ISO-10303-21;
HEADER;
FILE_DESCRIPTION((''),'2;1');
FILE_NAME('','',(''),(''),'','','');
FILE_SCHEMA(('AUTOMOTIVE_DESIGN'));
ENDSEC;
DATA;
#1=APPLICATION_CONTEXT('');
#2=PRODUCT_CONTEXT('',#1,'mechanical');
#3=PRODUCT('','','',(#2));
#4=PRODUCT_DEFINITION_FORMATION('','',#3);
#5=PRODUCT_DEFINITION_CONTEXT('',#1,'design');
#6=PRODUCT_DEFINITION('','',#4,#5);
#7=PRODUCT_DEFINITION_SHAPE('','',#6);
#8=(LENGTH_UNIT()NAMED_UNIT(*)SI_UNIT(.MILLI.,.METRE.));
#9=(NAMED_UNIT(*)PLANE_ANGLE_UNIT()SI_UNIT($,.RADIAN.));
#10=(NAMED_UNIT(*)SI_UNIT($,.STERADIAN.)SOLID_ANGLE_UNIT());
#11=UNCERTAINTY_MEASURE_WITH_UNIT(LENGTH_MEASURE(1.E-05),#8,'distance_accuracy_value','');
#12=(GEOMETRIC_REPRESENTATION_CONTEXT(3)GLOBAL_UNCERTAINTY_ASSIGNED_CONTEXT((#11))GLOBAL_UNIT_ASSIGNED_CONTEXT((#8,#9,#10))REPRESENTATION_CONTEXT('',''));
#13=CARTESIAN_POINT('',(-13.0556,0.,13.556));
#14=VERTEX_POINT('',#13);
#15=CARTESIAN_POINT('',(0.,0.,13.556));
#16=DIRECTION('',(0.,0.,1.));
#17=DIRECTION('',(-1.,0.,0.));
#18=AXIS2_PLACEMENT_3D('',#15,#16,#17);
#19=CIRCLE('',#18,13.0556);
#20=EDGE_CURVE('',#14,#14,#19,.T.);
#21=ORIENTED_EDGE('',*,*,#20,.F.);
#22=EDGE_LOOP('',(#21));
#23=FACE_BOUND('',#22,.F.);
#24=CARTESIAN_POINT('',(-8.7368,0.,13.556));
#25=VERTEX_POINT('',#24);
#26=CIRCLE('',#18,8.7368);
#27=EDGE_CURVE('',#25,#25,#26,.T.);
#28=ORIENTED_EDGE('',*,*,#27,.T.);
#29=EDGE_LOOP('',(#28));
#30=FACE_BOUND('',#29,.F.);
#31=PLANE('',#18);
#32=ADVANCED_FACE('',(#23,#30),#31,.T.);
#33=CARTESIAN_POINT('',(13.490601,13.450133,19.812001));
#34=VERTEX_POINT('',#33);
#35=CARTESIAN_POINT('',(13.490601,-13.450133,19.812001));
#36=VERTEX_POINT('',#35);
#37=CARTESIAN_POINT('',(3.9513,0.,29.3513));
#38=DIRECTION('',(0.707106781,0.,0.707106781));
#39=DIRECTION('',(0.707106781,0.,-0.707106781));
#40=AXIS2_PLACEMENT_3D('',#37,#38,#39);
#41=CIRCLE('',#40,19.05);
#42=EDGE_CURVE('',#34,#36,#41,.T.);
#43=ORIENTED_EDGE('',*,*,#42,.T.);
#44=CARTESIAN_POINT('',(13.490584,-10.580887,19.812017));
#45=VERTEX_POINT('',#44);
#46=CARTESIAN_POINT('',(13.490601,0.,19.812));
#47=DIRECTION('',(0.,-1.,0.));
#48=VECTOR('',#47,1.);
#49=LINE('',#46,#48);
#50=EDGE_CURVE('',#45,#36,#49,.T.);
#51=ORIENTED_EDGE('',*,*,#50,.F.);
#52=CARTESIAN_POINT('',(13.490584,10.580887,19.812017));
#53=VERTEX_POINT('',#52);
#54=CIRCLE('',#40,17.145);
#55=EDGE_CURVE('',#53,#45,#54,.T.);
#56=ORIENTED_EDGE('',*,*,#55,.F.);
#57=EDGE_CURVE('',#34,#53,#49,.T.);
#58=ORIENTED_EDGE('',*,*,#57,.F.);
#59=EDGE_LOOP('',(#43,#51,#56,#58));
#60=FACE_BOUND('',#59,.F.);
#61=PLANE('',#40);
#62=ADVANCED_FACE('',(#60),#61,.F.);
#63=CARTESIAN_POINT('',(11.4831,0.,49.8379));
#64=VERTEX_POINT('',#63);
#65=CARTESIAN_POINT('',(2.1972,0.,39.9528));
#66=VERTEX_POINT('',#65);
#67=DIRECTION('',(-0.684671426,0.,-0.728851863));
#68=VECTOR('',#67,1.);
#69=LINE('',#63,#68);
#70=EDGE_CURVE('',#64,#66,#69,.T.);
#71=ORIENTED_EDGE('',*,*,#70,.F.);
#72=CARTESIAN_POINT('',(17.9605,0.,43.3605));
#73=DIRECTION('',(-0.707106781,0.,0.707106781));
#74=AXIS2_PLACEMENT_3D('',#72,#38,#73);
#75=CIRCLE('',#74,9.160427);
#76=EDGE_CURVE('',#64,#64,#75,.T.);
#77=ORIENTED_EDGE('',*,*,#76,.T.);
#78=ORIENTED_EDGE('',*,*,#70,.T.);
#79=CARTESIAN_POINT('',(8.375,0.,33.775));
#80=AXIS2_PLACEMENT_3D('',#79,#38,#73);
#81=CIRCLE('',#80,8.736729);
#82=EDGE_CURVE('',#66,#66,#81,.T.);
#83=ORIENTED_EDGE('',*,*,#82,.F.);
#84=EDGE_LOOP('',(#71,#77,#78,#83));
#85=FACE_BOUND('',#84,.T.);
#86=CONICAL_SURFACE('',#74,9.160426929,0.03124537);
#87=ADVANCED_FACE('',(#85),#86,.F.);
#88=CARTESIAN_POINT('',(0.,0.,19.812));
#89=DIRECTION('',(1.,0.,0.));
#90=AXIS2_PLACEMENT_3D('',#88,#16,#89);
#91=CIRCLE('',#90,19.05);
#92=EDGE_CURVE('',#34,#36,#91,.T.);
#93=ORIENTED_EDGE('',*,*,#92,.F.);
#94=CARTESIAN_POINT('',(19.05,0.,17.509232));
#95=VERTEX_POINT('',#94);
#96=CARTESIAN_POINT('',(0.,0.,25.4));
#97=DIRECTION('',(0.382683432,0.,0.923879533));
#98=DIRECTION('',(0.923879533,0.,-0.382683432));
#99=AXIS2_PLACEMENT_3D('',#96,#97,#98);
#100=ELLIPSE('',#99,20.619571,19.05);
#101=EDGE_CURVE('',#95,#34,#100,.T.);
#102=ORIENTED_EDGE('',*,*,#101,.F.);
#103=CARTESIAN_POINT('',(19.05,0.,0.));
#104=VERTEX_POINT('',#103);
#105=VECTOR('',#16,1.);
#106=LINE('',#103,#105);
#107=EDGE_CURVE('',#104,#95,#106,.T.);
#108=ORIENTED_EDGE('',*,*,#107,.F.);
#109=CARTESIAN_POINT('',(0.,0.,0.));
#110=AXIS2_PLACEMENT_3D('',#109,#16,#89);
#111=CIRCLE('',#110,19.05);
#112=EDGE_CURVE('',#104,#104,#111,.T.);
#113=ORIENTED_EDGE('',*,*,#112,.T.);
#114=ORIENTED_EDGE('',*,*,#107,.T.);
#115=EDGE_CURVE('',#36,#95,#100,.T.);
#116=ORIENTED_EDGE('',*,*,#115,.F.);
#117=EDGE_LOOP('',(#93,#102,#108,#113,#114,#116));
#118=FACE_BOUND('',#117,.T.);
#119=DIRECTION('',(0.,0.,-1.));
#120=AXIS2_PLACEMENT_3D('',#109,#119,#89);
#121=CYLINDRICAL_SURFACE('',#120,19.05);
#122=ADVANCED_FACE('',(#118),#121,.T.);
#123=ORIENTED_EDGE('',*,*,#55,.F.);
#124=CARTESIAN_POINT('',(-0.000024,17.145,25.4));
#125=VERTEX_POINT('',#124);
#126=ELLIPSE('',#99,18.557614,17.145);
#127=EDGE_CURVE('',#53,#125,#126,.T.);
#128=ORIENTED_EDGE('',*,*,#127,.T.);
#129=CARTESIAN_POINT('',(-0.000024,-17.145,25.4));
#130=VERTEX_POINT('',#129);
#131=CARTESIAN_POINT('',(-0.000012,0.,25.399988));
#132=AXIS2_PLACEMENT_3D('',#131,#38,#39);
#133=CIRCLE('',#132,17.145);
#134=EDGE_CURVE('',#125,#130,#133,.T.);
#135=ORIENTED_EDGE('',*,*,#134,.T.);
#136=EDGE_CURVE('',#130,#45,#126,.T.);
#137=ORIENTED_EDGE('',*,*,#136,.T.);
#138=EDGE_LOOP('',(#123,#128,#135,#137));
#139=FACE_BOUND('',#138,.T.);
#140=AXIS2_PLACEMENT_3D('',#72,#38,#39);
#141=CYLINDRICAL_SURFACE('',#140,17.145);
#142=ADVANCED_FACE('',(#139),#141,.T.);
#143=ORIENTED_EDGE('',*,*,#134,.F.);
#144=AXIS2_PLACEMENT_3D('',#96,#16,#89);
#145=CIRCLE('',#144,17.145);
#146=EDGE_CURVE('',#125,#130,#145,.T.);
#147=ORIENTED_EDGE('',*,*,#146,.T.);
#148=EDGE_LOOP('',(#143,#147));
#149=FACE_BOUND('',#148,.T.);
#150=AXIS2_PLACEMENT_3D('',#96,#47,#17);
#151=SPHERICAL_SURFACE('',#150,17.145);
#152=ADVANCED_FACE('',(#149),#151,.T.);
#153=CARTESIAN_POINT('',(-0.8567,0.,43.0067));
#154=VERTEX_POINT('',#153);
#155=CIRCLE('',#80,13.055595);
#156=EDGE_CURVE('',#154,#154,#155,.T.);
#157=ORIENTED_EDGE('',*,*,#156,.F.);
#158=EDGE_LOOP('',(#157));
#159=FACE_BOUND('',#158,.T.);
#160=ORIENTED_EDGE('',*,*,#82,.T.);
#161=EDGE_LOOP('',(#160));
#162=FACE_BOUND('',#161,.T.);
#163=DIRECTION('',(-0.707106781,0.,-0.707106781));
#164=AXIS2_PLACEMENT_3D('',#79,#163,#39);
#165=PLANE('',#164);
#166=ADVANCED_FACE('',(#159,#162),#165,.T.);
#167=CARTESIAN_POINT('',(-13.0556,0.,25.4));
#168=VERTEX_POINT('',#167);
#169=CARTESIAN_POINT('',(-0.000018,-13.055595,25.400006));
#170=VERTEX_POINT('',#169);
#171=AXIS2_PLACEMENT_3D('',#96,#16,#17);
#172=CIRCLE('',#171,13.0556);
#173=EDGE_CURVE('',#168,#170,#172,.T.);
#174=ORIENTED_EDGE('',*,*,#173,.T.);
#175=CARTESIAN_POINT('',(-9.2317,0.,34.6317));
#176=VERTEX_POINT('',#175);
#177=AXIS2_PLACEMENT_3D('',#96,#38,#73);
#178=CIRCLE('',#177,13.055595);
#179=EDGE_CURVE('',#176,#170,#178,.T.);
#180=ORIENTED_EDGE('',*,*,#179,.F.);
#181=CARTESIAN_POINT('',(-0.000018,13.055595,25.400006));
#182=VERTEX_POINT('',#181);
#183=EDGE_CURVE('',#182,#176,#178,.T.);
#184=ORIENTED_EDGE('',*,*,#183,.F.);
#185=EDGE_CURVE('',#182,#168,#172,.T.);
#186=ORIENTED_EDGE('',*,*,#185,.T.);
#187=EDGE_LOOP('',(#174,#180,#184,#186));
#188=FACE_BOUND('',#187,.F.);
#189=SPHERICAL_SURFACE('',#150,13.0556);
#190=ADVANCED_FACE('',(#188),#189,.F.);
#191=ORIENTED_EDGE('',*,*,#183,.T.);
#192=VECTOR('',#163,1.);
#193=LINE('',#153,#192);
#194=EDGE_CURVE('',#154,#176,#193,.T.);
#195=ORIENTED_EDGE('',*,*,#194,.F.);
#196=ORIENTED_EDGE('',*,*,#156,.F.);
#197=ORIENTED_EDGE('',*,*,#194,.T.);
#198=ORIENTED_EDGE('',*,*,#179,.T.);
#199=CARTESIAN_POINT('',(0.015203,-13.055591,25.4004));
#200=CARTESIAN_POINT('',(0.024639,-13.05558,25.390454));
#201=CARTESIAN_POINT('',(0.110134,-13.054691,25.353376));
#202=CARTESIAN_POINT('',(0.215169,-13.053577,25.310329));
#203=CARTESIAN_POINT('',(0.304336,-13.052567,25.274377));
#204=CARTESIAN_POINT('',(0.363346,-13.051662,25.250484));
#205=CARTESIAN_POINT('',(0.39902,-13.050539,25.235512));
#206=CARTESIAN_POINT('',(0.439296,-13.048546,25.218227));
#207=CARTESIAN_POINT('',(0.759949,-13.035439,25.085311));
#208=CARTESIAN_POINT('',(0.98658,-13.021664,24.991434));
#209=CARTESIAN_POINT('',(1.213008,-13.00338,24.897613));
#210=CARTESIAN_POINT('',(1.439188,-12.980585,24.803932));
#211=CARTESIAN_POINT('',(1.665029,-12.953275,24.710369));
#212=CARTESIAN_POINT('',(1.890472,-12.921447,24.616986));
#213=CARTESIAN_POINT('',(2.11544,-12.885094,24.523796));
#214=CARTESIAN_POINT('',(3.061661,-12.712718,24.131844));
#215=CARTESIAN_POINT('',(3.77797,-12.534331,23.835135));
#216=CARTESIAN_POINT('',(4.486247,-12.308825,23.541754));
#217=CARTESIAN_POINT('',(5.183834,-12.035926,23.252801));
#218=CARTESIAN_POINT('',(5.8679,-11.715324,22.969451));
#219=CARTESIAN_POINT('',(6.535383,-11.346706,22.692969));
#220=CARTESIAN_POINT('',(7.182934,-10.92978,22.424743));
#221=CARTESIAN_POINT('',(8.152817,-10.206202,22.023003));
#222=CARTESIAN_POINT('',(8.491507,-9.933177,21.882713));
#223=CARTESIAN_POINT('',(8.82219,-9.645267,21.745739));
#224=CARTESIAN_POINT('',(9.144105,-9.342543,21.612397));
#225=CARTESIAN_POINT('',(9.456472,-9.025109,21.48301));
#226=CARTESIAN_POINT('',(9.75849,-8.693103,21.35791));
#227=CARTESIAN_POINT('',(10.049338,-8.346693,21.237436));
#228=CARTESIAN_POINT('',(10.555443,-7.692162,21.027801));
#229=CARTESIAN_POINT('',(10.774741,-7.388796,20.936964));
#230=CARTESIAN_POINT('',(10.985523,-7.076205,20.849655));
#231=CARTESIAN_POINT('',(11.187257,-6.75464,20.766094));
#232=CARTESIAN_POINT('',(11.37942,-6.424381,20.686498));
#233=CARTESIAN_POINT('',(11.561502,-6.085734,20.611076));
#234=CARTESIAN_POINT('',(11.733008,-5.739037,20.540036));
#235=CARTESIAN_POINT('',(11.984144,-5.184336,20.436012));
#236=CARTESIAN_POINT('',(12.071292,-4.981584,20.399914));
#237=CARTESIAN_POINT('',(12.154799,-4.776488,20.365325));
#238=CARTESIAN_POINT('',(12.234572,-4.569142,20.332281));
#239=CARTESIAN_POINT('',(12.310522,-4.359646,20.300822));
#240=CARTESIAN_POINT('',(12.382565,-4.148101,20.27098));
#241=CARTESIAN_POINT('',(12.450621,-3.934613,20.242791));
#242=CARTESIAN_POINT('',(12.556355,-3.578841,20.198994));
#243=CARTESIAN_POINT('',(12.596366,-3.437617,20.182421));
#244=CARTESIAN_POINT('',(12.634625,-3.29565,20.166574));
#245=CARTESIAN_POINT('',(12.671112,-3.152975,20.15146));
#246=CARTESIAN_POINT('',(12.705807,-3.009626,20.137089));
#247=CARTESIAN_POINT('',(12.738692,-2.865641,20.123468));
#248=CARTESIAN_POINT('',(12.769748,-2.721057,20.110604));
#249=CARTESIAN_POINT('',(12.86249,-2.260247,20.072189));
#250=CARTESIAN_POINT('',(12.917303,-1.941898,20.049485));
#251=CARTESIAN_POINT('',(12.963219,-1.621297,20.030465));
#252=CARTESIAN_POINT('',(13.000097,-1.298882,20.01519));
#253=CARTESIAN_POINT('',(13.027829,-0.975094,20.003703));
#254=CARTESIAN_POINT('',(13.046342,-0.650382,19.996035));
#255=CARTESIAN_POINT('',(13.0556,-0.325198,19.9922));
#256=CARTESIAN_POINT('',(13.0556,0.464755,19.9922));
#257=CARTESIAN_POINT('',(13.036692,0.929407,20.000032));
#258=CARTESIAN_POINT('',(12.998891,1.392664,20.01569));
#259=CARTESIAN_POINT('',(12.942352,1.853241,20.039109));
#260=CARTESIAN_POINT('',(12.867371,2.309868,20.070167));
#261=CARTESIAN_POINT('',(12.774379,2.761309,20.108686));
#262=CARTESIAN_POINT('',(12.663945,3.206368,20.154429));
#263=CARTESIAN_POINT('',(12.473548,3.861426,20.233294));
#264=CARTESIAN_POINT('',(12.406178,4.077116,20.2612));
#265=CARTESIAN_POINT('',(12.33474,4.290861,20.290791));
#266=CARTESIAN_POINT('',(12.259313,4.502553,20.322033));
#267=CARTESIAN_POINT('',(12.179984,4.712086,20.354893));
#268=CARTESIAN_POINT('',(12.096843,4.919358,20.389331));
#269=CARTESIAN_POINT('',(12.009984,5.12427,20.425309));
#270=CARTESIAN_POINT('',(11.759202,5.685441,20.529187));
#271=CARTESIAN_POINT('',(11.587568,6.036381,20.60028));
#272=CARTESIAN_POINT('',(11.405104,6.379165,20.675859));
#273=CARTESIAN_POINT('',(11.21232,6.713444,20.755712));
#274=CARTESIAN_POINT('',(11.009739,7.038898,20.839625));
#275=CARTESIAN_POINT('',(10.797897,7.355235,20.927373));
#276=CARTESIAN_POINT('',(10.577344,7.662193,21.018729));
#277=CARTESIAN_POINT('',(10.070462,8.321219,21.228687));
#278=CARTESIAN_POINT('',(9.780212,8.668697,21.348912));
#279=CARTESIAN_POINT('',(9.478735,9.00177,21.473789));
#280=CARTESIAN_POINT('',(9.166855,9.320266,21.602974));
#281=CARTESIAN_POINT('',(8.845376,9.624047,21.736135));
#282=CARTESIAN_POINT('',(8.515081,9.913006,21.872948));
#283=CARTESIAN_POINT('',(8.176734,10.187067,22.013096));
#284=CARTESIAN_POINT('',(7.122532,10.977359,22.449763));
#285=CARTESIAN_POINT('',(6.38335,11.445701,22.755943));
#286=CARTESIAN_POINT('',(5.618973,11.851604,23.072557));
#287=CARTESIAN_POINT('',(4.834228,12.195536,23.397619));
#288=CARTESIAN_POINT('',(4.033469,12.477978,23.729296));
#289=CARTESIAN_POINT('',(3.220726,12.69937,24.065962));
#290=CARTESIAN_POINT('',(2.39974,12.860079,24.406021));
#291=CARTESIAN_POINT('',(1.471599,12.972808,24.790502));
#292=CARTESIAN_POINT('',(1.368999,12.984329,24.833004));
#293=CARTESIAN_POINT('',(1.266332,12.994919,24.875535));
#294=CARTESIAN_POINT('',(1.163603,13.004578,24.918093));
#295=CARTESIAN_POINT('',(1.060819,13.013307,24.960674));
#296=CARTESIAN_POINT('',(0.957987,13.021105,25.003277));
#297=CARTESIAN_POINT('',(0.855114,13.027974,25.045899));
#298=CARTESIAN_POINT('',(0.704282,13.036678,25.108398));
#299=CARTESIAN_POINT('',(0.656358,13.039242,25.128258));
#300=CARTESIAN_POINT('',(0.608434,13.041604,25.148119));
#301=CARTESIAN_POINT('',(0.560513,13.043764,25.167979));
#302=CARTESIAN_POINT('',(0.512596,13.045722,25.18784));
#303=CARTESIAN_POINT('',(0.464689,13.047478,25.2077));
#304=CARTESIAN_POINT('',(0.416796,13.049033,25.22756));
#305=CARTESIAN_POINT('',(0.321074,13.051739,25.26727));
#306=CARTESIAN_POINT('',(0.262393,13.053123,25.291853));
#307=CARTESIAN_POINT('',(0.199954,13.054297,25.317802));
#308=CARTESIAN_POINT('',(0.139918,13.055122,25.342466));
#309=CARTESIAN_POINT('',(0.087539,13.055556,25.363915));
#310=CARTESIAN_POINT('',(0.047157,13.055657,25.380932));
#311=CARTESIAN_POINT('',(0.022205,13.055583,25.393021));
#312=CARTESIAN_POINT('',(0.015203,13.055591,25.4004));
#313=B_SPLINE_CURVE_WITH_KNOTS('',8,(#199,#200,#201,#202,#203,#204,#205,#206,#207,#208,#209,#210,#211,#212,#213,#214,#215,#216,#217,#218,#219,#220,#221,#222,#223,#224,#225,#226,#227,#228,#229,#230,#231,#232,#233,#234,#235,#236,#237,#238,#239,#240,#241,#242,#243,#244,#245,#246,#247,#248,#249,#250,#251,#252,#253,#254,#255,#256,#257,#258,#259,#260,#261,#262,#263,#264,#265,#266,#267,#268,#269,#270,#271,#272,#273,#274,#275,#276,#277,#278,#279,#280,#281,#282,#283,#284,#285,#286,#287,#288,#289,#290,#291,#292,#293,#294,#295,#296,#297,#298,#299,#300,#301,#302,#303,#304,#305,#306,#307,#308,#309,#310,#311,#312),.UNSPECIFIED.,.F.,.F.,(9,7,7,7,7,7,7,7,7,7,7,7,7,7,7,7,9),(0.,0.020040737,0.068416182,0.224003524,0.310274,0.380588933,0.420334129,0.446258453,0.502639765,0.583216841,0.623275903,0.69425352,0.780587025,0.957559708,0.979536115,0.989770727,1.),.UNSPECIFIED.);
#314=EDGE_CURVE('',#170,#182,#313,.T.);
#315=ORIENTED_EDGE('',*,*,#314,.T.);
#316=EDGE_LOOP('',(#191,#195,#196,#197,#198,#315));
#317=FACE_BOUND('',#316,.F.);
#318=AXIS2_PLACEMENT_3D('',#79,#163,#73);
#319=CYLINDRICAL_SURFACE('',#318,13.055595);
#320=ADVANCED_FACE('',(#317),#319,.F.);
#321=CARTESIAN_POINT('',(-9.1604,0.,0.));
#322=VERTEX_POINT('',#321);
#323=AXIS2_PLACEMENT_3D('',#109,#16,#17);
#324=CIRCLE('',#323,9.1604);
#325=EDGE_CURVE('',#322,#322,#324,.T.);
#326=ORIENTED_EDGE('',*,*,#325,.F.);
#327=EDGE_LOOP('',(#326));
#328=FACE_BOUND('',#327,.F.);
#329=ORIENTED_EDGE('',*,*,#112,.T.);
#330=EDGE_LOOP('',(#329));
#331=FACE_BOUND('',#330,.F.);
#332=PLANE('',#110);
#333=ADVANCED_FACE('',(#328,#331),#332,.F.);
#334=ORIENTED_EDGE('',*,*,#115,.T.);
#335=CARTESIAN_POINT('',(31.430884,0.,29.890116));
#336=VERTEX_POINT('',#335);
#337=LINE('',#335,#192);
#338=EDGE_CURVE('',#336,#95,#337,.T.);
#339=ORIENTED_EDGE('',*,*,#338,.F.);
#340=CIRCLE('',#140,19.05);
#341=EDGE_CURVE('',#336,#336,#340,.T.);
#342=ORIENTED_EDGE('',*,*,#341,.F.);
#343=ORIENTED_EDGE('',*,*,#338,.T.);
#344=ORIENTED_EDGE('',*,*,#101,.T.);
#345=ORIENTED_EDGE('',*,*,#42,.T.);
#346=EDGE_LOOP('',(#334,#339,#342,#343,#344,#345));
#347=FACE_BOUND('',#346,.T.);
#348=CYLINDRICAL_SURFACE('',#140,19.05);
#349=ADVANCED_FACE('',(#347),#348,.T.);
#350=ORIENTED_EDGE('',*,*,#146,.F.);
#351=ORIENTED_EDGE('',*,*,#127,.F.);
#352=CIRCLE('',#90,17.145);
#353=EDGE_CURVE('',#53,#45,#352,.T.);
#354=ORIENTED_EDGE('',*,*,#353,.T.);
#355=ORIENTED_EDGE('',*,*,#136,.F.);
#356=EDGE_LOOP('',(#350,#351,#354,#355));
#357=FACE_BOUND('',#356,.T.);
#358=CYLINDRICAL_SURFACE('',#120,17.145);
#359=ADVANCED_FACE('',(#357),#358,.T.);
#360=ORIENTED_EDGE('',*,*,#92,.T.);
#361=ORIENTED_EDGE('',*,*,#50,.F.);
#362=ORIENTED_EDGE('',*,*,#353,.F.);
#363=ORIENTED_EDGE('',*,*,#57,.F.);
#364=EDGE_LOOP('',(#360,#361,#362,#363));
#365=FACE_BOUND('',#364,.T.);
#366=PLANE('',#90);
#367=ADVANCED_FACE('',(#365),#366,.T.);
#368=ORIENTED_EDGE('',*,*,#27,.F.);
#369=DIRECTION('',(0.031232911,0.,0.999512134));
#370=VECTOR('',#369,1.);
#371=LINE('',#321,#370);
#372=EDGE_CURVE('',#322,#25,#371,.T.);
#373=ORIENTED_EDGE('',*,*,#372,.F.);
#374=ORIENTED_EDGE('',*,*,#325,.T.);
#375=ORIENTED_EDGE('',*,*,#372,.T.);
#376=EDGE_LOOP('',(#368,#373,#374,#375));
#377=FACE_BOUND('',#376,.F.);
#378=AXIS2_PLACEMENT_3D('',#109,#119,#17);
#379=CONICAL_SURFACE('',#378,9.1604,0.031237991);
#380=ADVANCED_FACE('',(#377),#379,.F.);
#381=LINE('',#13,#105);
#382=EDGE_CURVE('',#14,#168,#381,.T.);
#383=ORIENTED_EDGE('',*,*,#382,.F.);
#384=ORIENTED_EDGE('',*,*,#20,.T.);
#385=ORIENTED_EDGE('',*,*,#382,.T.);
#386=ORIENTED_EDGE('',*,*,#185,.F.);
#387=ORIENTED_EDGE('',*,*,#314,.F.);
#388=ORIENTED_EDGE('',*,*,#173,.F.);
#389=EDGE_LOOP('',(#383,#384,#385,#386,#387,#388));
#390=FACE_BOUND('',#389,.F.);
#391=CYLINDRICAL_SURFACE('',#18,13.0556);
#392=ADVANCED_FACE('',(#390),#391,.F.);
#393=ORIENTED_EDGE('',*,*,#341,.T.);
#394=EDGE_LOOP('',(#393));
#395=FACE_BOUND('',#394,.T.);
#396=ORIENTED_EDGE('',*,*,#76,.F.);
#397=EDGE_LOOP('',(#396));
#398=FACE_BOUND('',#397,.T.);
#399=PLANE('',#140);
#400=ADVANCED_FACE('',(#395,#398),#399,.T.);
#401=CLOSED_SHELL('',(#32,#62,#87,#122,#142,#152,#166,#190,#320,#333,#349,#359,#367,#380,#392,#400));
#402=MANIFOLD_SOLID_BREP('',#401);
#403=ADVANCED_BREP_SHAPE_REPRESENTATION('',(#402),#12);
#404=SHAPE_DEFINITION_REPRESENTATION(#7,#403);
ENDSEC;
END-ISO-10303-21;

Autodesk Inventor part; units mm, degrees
ref_plane "YZ Plane" through (0, 0, 0) normal (1, 0, 0) x (0, 1, 0)
sketch "Sketch1" plane through (0, 0, 0) normal (0, 1, 0) x (-1, 0, 0)
  line L0 (0, 0) -> (0, 25.4)
  line L1 (0, 25.4) -> (-17.9605, 43.3605)
  line L2 (-17.9605, 43.3605) -> (-30.0839, 31.2372) construction
  line L3 (-30.0839, 31.2372) -> (-12.1233, 13.2767) construction
  line L4 (0, 25.4) -> (-12.1233, 13.2767) construction
  line L5 (0, 25.4) -> (-17.145, 25.4) construction
  line L6 (-17.145, 25.4) -> (-17.145, 0) construction
  line L7 (0, 0) -> (-17.145, 0) construction
  line L8 (-17.145, 18.2983) -> (0, 25.4) construction
  line L9 (-17.145, 18.2983) -> (0, 18.2983) construction
  line L10 (-17.145, 18.2983) -> (-5.0217, 30.4217) construction
  line L11 (-17.9605, 43.3605) -> (-11.4831, 49.8379)
  line L12 (-11.4831, 49.8379) -> (-2.1972, 39.9528)
  line L13 (-2.1972, 39.9528) -> (0.8567, 43.0067)
  line L14 (0.8567, 43.0067) -> (9.2317, 34.6317)
  line L15 (0, 25.4) -> (9.2317, 34.6317)
  line L16 (-2.1972, 39.9528) -> (-8.375, 33.775) construction
  line L17 (0, 0) -> (9.1604, 0)
  line L18 (9.1604, 0) -> (8.7368, 13.556)
  line L19 (8.7368, 13.556) -> (13.0556, 13.556)
  line L20 (13.0556, 13.556) -> (13.0556, 25.4)
  line L21 (0, 25.4) -> (13.0556, 25.4)
  line L22 (8.7368, 13.556) -> (0, 13.556) construction
  dimension "d0" = 25.4
  dimension "d1" = 25.4
  dimension "d2" = 135
  dimension "d3" = 34.29
  dimension "d4" = 34.29
  dimension "d5" = 18.3208
  dimension "d6" = 26.1112
  dimension "d7" = 13.556
  dimension "d8" = 1.79
  dimension "d9" = 18.3208
  dimension "d10" = 26.1112
  dimension "d11" = 13.556
  dimension "d12" = 1.79
ref_plane "Work Plane1" through (17.9605, 0, 43.3605) normal (0.7071068, 0, 0.7071068) x (0.7071068, 0, -0.7071068)
ref_plane "Work Plane2" through (0, 0, 0) normal (0, 0, 1) x (1, 0, 0)
sketch "Sketch2" plane through (17.9605, 0, 43.3605) normal (0.7071068, 0, 0.7071068) x (0.7071068, 0, -0.7071068)
  circle A0 centre (0, 0) radius 17.145
  line L0 (0, 0) -> (17.145, 0) projected
  circle A1 centre (0, 0) radius 19.05
  dimension "d15" = 34.29
  dimension "d18" = 38.1
extrude "Extrude1" add sketch "Sketch2" against normal blind 25.4 contours A0
extrude "Extrude2" add sketch "Sketch2" against normal blind 19.812
sketch "Sketch3" plane through (0, 0, 0) normal (0, 0, 1) x (1, 0, 0)
  line L0 (0, 0) -> (17.145, 0) projected
  circle A0 centre (0, 0) radius 17.145
  circle A1 centre (0, 0) radius 19.05
  dimension "d22" = 34.29
  dimension "d25" = 38.1
extrude "Extrude3" add sketch "Sketch3" along normal blind 25.4 contours A0
extrude "Extrude4" add sketch "Sketch3" along normal blind 19.812
revolve "Revolve1" cut sketch "Sketch1" angle 360 about axis through (0, 0, 25.4) along (0.7071068, 0, 0.7071068) contours L1 L11 L12 L13 L14 L15
revolve "Revolve2" cut sketch "Sketch1" angle 360 about axis through (0, 0, 0) along (0, 0, 1) contours L0 L21 L20 L19 L18 L17
sketch "Sketch4" plane through (0, 0, 25.4) normal (0, 0, 1) x (1, 0, 0)
  arc A0 (0, 13.0556) -> (0, -13.0556) centre (0, 0) ccw projected
  line L0 (0, 17.145) -> (0, 13.0556) projected
  arc A1 (0, 17.145) -> (0, -17.145) centre (0, 0) ccw projected
  line L1 (0, -13.0556) -> (0, -17.145) projected
  arc A2 (0, 17.145) -> (0, -17.145) centre (0, 0) ccw
  arc A3 (0, 13.0556) -> (0, -13.0556) centre (0, 0) ccw
  line L2 (0, 13.0556) -> (0, -13.0556) construction
  line L3 (0, -13.0556) -> (0, -17.145)
  line L4 (0, 13.0556) -> (0, 17.145)
  dimension "d29" = 17.145
  dimension "d30" = 13.0556
revolve "Revolve3" add sketch "Sketch4" angle 45 about axis through (0, -13.0556, 25.4) along (0, 1, 0)
thread "Filetage1" size "1/2" designation "1/2 - 14 NPT" standard "NPT" full length
thread "Filetage2" size "1/2" designation "1/2 - 14 NPT" standard "NPT" full length
equation "\"d0\" = C1"
equation "\"d1\" = C1"
equation "\"d3\" = 0.9 * H"
equation "\"d4\" = 0.9 * H"
equation "\"d5\" = MD"
equation "\"d6\" = 0.9 * H - 2 * G"
equation "\"d7\" = L2"
equation "\"d9\" = MD"
equation "\"d10\" = 0.9 * H - 2 * G"
equation "\"d11\" = L2"
equation "\"d15\" = 0.9 * H"
equation "\"d18\" = H"
equation "\"d16\" = C1"
equation "\"d19\" = 0.78 * C1"
equation "\"d22\" = 0.9 * H"
equation "\"d25\" = H"
equation "\"d23\" = C1"
equation "\"d26\" = 0.78 * C1"
equation "\"d29\" = 0.45 * H"
equation "\"d30\" = 0.45 * H - G"
equation "\"C1\" = 25.4"
equation "\"H\" = 38.1"
equation "\"G\" = 4.0894"
equation "\"L2\" = 13.55598"
equation "\"MD\" = 18.32077"
equation "\"A\" = 33.274"
equation "\"Size_Designation\" = 0.5"
properties part number "ASME B16.11 Coude 45 deg taraudé - Catégorie 3000 1/2" material "Steel"
